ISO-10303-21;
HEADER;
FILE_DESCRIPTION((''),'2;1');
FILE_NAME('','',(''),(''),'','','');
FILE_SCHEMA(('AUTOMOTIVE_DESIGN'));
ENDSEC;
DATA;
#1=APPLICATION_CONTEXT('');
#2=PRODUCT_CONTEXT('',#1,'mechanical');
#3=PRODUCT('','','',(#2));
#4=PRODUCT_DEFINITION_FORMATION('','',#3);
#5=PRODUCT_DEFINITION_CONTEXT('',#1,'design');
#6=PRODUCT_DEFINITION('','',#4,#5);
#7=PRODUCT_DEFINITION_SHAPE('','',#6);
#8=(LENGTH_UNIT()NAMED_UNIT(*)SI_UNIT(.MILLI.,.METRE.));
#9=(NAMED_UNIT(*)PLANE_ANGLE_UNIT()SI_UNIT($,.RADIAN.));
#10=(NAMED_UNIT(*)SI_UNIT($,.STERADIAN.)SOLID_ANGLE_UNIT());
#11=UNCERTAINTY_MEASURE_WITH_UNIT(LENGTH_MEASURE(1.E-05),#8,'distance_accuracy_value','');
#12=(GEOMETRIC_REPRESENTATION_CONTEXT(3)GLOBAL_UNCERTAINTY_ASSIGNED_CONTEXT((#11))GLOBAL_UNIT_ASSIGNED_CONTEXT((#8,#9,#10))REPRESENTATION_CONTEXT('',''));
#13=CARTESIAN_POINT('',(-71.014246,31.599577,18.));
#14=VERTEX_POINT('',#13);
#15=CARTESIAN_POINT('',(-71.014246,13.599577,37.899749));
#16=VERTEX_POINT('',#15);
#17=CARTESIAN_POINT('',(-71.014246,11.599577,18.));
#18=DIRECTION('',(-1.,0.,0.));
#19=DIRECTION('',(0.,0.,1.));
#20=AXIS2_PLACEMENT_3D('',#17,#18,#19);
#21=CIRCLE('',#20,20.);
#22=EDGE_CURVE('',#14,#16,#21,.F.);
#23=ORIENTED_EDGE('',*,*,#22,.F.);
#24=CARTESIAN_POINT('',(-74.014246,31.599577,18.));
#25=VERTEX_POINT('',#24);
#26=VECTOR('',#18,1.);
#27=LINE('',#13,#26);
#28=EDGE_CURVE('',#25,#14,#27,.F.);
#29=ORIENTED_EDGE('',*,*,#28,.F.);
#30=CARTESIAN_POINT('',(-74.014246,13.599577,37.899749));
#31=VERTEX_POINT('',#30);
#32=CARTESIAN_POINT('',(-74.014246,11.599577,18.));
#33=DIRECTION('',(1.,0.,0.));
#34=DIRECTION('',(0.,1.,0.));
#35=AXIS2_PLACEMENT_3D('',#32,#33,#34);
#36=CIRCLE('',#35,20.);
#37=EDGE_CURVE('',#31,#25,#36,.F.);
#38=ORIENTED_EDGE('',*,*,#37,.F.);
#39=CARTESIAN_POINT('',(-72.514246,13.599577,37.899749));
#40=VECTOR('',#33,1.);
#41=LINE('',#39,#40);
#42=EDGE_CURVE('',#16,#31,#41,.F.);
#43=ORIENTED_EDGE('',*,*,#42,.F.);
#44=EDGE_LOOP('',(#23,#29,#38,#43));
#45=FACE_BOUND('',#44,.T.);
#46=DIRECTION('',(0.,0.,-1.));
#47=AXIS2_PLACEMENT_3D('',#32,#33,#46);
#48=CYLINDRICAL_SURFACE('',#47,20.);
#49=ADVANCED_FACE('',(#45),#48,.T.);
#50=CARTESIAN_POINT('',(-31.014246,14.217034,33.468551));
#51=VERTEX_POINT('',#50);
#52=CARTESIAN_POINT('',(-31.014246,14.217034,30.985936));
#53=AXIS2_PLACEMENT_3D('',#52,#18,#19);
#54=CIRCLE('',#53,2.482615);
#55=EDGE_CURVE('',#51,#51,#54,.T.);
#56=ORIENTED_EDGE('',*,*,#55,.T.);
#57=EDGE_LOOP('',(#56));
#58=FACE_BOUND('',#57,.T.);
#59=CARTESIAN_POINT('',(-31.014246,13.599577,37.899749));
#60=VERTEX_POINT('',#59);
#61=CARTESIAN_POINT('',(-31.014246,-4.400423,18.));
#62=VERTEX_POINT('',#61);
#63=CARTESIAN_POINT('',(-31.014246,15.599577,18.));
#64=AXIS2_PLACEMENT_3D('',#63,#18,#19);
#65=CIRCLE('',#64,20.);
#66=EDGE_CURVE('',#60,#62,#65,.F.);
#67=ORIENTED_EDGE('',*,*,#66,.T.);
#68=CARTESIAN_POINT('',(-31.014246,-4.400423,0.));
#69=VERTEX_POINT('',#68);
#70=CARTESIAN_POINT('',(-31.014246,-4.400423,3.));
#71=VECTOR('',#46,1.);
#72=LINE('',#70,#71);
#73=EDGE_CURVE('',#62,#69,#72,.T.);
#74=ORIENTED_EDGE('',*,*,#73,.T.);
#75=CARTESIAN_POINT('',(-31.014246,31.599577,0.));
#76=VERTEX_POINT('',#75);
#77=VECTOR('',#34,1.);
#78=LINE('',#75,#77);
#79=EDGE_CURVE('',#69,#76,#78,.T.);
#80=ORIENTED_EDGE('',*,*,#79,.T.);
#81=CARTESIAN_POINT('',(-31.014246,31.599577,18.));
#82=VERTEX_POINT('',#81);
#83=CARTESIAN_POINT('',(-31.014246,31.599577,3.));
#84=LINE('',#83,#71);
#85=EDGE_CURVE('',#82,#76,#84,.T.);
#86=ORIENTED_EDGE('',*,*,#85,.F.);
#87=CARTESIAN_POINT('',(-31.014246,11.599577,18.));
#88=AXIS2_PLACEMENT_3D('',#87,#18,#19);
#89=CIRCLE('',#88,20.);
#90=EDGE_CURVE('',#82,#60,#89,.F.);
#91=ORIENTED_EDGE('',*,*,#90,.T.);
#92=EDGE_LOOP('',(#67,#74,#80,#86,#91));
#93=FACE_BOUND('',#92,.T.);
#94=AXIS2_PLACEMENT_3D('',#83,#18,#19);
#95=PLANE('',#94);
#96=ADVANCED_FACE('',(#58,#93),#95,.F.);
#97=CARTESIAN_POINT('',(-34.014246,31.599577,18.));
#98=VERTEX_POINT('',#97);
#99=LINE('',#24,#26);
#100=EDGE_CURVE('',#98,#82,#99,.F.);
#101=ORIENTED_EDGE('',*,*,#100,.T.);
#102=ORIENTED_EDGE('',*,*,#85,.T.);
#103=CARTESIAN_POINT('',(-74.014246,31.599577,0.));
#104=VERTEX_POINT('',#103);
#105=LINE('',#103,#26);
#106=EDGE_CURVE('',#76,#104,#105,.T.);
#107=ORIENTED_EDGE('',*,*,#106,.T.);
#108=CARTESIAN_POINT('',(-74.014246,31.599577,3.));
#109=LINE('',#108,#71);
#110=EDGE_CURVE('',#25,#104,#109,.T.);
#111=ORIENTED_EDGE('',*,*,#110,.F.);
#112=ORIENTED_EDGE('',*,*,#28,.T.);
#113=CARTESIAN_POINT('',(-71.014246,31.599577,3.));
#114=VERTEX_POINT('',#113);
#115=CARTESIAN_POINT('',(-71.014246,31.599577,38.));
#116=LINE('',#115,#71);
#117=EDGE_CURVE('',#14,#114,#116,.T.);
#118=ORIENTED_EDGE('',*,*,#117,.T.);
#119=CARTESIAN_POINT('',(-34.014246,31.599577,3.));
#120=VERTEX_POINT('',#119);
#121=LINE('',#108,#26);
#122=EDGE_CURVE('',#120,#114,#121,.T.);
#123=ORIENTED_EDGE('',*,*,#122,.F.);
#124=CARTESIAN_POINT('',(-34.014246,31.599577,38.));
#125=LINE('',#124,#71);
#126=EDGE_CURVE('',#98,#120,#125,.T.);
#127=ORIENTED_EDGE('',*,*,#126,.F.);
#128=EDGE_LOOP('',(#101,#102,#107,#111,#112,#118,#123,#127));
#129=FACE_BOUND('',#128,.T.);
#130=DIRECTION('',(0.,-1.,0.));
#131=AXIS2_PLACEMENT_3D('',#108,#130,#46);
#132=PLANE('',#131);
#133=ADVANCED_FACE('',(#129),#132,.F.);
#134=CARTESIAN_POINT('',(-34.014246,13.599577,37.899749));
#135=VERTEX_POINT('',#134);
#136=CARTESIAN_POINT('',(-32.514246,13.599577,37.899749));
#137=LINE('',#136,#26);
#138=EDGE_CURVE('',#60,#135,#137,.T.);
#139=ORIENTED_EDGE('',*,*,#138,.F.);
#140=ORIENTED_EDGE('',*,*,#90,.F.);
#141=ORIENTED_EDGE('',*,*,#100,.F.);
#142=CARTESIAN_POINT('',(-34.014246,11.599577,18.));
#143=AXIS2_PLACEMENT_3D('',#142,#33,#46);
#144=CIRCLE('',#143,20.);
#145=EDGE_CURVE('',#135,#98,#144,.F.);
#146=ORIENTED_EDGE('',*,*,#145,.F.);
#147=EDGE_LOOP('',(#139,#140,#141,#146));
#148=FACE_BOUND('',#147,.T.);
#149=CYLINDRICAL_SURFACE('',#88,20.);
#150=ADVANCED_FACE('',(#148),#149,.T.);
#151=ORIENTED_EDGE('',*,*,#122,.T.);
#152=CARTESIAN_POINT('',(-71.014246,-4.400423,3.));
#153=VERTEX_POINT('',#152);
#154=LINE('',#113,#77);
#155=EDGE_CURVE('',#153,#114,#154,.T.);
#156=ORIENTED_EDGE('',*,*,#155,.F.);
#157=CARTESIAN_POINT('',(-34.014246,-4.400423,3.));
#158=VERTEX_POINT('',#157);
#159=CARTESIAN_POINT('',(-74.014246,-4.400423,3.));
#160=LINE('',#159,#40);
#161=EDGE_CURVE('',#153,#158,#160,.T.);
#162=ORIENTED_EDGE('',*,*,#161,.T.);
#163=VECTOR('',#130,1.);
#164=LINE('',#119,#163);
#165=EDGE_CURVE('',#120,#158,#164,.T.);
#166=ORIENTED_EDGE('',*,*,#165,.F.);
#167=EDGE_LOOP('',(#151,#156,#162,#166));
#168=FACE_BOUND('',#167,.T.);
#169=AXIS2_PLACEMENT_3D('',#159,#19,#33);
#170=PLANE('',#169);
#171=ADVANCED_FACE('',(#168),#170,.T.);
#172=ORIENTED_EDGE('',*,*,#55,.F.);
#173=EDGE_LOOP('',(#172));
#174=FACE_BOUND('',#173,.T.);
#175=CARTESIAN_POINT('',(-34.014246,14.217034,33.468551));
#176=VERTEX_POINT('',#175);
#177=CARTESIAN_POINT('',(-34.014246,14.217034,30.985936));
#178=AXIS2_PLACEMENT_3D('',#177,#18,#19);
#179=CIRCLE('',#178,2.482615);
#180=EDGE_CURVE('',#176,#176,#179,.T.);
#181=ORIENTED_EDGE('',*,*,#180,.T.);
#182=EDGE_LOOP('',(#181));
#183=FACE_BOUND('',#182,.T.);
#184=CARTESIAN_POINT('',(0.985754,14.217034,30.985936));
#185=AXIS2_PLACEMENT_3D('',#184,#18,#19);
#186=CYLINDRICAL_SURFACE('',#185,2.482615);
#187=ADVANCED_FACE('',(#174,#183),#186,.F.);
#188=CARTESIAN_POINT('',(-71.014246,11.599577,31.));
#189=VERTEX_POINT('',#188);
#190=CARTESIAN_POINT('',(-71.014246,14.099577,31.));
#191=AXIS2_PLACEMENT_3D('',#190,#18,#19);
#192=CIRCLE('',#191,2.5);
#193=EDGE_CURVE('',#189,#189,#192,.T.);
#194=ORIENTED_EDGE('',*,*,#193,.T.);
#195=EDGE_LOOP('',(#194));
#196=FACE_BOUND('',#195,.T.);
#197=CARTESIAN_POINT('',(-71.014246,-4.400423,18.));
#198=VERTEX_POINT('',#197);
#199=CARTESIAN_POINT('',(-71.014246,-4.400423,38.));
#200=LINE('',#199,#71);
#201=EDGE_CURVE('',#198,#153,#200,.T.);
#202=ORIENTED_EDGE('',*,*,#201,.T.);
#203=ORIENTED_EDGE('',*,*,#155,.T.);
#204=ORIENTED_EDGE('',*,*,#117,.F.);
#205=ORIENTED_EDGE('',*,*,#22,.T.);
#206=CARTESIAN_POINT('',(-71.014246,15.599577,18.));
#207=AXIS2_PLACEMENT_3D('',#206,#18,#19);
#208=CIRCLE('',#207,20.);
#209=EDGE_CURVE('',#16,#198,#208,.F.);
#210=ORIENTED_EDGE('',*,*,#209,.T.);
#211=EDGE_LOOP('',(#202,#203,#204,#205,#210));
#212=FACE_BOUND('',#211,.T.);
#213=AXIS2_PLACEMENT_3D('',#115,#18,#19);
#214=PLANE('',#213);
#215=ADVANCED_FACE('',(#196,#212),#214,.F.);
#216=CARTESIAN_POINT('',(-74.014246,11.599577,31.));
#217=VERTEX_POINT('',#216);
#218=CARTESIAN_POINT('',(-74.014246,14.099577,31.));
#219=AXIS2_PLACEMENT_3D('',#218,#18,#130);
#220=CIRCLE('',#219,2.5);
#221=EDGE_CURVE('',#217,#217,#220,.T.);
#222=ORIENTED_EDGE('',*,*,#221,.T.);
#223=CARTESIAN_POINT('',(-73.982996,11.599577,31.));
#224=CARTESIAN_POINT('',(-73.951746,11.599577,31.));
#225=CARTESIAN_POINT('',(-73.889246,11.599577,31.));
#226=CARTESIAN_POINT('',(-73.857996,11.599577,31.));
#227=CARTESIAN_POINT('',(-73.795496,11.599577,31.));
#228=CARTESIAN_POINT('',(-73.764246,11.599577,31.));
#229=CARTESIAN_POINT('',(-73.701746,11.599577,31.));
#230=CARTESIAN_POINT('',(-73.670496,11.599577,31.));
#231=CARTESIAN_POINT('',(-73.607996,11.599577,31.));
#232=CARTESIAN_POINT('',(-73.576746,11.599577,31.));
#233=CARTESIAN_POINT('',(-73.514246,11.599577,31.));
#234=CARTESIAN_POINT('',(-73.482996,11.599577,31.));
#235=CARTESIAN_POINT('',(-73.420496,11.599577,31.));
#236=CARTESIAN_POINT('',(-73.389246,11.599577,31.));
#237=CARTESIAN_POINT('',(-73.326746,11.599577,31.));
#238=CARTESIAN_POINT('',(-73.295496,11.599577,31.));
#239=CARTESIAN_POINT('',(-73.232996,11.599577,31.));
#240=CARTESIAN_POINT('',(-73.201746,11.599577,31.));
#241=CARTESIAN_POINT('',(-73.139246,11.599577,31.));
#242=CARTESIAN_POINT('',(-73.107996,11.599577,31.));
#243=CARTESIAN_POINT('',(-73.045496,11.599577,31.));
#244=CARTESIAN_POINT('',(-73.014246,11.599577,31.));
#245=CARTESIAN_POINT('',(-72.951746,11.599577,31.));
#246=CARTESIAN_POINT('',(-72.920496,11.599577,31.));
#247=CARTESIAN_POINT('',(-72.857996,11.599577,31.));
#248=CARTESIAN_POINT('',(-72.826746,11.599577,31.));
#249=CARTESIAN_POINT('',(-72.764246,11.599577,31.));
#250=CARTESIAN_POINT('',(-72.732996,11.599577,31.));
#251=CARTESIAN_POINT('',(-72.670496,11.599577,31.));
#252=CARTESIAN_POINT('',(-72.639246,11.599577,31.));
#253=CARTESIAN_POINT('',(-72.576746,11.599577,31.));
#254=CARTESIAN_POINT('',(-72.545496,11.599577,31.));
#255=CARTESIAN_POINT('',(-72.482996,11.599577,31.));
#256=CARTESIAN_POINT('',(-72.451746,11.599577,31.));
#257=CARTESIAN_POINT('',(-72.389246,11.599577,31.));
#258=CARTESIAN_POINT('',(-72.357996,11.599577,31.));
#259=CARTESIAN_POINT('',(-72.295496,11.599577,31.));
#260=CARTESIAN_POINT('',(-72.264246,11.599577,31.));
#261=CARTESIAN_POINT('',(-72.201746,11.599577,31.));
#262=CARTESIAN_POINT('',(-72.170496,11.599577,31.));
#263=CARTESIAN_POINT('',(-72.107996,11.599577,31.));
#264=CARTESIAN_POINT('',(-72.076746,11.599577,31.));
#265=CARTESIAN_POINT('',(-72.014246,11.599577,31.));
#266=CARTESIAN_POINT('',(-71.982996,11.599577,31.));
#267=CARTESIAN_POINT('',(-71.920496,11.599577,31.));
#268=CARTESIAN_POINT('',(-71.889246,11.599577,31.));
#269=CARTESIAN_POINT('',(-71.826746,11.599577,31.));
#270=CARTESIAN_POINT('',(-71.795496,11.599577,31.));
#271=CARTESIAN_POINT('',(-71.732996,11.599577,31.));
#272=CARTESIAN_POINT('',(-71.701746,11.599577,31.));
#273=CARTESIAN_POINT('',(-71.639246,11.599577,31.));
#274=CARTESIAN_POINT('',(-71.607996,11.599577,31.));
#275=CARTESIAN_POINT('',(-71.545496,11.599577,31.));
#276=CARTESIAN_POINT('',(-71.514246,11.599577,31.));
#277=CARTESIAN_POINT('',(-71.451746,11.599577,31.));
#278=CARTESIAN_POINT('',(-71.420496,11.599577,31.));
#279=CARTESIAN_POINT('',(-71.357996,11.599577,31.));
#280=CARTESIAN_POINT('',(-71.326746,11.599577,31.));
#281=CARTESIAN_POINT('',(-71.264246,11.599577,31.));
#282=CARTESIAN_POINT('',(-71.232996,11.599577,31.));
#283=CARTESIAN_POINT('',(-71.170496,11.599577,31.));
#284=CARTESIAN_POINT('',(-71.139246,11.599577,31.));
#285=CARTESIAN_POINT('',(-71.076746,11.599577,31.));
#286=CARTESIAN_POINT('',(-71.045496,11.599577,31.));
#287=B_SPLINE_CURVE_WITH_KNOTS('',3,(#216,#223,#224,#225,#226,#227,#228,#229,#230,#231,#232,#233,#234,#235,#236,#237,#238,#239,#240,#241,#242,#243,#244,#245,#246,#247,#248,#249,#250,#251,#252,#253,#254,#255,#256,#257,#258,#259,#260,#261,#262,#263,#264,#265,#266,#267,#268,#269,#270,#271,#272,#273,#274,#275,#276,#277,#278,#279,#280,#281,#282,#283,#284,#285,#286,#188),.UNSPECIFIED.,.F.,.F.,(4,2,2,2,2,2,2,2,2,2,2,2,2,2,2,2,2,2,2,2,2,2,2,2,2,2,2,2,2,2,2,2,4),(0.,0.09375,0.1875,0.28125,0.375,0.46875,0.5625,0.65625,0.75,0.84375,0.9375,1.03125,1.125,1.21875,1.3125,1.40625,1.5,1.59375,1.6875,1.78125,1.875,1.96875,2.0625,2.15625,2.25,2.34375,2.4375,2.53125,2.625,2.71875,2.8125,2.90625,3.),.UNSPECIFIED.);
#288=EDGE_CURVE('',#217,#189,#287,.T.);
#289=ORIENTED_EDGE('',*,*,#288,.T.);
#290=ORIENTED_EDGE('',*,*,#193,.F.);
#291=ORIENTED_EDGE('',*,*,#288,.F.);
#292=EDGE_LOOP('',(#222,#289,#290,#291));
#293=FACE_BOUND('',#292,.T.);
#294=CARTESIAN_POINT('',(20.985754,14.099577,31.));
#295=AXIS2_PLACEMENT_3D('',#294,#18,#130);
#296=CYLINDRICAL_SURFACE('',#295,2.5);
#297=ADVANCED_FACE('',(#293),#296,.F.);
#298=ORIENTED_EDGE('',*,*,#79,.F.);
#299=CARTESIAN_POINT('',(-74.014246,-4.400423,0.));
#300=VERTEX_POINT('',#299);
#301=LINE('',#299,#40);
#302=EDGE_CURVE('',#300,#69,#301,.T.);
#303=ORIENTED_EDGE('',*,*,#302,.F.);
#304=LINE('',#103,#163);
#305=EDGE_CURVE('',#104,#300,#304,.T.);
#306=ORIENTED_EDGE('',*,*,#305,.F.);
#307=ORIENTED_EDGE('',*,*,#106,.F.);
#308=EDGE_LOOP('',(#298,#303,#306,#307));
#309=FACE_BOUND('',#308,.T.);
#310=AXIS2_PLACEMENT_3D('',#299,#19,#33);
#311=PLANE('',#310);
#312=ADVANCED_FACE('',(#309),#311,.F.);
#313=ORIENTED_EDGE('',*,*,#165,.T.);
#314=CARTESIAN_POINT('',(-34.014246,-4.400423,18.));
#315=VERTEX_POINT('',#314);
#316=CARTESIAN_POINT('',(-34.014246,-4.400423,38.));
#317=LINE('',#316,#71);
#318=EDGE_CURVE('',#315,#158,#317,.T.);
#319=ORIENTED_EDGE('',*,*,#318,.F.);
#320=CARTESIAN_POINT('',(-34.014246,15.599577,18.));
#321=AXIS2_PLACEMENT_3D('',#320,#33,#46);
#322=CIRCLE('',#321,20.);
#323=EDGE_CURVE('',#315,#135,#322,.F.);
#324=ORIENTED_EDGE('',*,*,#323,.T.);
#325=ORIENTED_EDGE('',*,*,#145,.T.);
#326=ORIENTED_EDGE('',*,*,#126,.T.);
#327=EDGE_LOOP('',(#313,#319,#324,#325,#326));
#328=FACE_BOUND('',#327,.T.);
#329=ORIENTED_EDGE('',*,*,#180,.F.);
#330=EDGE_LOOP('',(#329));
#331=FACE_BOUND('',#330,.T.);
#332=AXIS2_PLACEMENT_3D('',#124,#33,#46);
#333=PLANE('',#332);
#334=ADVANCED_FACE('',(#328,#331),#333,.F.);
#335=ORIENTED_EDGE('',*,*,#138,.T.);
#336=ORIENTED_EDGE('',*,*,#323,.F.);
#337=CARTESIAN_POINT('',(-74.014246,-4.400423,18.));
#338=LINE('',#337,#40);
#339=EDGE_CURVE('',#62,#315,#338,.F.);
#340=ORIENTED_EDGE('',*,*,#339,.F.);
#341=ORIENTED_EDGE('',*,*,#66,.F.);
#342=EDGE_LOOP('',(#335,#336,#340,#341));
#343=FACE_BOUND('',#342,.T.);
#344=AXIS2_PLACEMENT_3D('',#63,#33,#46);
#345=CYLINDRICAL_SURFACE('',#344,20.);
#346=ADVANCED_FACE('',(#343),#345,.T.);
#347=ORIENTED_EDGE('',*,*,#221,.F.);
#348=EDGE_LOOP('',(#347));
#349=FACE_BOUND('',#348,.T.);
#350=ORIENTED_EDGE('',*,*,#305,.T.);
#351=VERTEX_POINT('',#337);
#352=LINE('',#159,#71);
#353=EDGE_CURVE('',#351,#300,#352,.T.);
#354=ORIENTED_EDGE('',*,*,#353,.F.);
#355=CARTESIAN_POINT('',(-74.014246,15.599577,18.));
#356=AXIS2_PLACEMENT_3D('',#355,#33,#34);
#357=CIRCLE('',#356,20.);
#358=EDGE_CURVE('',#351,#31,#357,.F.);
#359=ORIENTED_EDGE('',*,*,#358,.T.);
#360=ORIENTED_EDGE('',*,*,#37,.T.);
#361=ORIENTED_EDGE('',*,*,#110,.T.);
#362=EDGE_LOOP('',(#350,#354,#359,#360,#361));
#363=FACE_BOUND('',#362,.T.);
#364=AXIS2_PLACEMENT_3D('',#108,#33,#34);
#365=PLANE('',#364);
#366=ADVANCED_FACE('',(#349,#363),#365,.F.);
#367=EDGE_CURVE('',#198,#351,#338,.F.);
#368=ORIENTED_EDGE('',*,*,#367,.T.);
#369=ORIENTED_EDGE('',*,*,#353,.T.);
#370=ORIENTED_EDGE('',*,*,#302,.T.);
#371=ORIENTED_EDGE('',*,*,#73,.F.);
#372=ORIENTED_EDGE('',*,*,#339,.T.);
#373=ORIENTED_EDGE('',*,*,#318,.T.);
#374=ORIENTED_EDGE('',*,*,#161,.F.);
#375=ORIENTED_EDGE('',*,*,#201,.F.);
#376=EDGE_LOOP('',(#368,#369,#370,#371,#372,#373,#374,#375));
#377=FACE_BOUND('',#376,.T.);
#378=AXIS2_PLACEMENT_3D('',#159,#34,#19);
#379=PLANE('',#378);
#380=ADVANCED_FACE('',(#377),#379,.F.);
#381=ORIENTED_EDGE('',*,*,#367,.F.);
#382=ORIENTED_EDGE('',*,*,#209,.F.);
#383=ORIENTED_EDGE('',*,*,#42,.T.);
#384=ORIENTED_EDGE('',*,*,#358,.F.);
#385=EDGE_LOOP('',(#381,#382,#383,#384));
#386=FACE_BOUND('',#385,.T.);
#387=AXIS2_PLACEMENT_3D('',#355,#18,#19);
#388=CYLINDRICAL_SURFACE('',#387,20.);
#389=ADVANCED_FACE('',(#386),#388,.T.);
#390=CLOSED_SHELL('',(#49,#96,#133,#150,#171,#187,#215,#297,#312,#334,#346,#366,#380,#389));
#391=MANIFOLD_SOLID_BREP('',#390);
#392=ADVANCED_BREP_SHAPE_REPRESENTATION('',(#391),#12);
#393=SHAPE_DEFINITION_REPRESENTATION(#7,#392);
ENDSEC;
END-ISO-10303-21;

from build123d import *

# Parameters (mm, degrees)
ESQUISSE1_W             = 43
ESQUISSE1_H             = 36
BOSS_EXTRU_1_DEPTH      = 3
ESQUISSE2_W             = 3
ESQUISSE2_H             = 36
BOSS_EXTRU_2_DEPTH      = 25
ESQUISSE3_W             = 3
ESQUISSE3_H             = 36
BOSS_EXTRU_3_DEPTH      = 35
ESQUISSE4_R             = 2.5
ENL_V_MAT_EXTRU_1_DEPTH = 95
CONG_1_R                = 20
ESQUISSE5_W             = 46.070025289
ESQUISSE5_H             = 43.599493682
ENL_V_MAT_EXTRU_2_DEPTH = 95
ESQUISSE6_W             = 3
ESQUISSE6_H             = 36
BOSS_EXTRU_4_DEPTH      = 35
ESQUISSE7_R             = 2.482615241
ENL_V_MAT_EXTRU_3_DEPTH = 35
CONG_2_R                = 20


with BuildPart() as part:
    # Esquisse1 → Boss.-Extru.1 (new body)
    with BuildSketch(Plane.XY):
        with Locations((-52.514246193, 13.599576988)):
            Rectangle(ESQUISSE1_W, ESQUISSE1_H)
    extrude(amount=BOSS_EXTRU_1_DEPTH)

    # Esquisse2 → Boss.-Extru.2 (add)
    with BuildSketch(Plane.XY.offset(3)):
        with Locations((-32.514246193, 13.599576988)):
            Rectangle(ESQUISSE2_W, ESQUISSE2_H)
    extrude(amount=BOSS_EXTRU_2_DEPTH)

    # Esquisse3 → Boss.-Extru.3 (add)
    with BuildSketch(Plane.XY.offset(3)):
        with Locations((-72.514246193, 13.599576988)):
            Rectangle(ESQUISSE3_W, ESQUISSE3_H)
    extrude(amount=BOSS_EXTRU_3_DEPTH)

    # Esquisse4 → Enlèv. mat.-Extru.1 (cut)
    with BuildSketch(Plane.ZY.offset(74.014246193)):
        with Locations(Location((31, 14.099576988, 0), (0, 0, 270))):
            Circle(ESQUISSE4_R)
    extrude(amount=-ENL_V_MAT_EXTRU_1_DEPTH, mode=Mode.SUBTRACT)

    # Congé1
    # the kernel refuses this fillet: 20 mm, written as the material it takes off along each edge
    with BuildSketch(Plane(origin=(-34.014246193, -4.400423012, 28), x_dir=(0, 1, 0), z_dir=(1, 0, 0))) as cong_1_piece_1:
        with BuildLine():
            CenterArc((CONG_1_R, -CONG_1_R), CONG_1_R, 90, 90)
            Line((0, -CONG_1_R), (0, 0))
            Line((0, 0), (CONG_1_R, 0))
        make_face()
    extrude(amount=53, mode=Mode.SUBTRACT)
    with BuildSketch(Plane(origin=(18.985753807, 31.599576988, 28), x_dir=(0, 0, -1), z_dir=(-1, 0, 0))) as cong_1_piece_2:
        with BuildLine():
            CenterArc((CONG_1_R, CONG_1_R), CONG_1_R, 180, 90)
            Line((0, CONG_1_R), (0, 0))
            Line((0, 0), (CONG_1_R, 0))
        make_face()
    extrude(amount=53, mode=Mode.SUBTRACT)
    with BuildSketch(Plane(origin=(-21.014246193, -4.400423012, 38), x_dir=(0, 1, 0), z_dir=(-1, 0, 0))) as cong_1_piece_3:
        with BuildLine():
            CenterArc((CONG_1_R, CONG_1_R), CONG_1_R, 180, 90)
            Line((0, CONG_1_R), (0, 0))
            Line((0, 0), (CONG_1_R, 0))
        make_face()
    extrude(amount=103, mode=Mode.SUBTRACT)
    with BuildSketch(Plane(origin=(-124.014246193, 31.599576988, 38), x_dir=(0, 0, -1), z_dir=(1, 0, 0))) as cong_1_piece_4:
        with BuildLine():
            CenterArc((CONG_1_R, -CONG_1_R), CONG_1_R, 90, 90)
            Line((0, -CONG_1_R), (0, 0))
            Line((0, 0), (CONG_1_R, 0))
        make_face()
    extrude(amount=103, mode=Mode.SUBTRACT)

    # Esquisse5 → Enlèv. mat.-Extru.2 (cut)
    with BuildSketch(Plane.ZY.offset(34.014246193)):
        with Locations((26.035012645, 9.799830147)):
            Rectangle(ESQUISSE5_W, ESQUISSE5_H)
    extrude(amount=-ENL_V_MAT_EXTRU_2_DEPTH, mode=Mode.SUBTRACT)

    # Esquisse6 → Boss.-Extru.4 (add)
    with BuildSketch(Plane.XY.offset(3)):
        with Locations((-32.514246193, 13.599576988)):
            Rectangle(ESQUISSE6_W, ESQUISSE6_H)
    extrude(amount=BOSS_EXTRU_4_DEPTH)

    # Esquisse7 → Enlèv. mat.-Extru.3 (cut)
    with BuildSketch(Plane.ZY.offset(34.014246193)):
        with Locations((30.985935606, 14.217034277)):
            Circle(ESQUISSE7_R)
    extrude(amount=-ENL_V_MAT_EXTRU_3_DEPTH, mode=Mode.SUBTRACT)

    # Congé2
    # the kernel refuses this fillet: 20 mm, written as the material it takes off along each edge
    with BuildSketch(Plane(origin=(-84.014246193, -4.400423012, 38), x_dir=(0, 1, 0), z_dir=(1, 0, 0))) as cong_2_piece_1:
        with BuildLine():
            CenterArc((CONG_2_R, -CONG_2_R), CONG_2_R, 90, 90)
            Line((0, -CONG_2_R), (0, 0))
            Line((0, 0), (CONG_2_R, 0))
        make_face()
    extrude(amount=103, mode=Mode.SUBTRACT)
    with BuildSketch(Plane(origin=(18.985753807, 31.599576988, 38), x_dir=(0, 0, -1), z_dir=(-1, 0, 0))) as cong_2_piece_2:
        with BuildLine():
            CenterArc((CONG_2_R, CONG_2_R), CONG_2_R, 180, 90)
            Line((0, CONG_2_R), (0, 0))
            Line((0, 0), (CONG_2_R, 0))
        make_face()
    extrude(amount=103, mode=Mode.SUBTRACT)


solid = part.part
